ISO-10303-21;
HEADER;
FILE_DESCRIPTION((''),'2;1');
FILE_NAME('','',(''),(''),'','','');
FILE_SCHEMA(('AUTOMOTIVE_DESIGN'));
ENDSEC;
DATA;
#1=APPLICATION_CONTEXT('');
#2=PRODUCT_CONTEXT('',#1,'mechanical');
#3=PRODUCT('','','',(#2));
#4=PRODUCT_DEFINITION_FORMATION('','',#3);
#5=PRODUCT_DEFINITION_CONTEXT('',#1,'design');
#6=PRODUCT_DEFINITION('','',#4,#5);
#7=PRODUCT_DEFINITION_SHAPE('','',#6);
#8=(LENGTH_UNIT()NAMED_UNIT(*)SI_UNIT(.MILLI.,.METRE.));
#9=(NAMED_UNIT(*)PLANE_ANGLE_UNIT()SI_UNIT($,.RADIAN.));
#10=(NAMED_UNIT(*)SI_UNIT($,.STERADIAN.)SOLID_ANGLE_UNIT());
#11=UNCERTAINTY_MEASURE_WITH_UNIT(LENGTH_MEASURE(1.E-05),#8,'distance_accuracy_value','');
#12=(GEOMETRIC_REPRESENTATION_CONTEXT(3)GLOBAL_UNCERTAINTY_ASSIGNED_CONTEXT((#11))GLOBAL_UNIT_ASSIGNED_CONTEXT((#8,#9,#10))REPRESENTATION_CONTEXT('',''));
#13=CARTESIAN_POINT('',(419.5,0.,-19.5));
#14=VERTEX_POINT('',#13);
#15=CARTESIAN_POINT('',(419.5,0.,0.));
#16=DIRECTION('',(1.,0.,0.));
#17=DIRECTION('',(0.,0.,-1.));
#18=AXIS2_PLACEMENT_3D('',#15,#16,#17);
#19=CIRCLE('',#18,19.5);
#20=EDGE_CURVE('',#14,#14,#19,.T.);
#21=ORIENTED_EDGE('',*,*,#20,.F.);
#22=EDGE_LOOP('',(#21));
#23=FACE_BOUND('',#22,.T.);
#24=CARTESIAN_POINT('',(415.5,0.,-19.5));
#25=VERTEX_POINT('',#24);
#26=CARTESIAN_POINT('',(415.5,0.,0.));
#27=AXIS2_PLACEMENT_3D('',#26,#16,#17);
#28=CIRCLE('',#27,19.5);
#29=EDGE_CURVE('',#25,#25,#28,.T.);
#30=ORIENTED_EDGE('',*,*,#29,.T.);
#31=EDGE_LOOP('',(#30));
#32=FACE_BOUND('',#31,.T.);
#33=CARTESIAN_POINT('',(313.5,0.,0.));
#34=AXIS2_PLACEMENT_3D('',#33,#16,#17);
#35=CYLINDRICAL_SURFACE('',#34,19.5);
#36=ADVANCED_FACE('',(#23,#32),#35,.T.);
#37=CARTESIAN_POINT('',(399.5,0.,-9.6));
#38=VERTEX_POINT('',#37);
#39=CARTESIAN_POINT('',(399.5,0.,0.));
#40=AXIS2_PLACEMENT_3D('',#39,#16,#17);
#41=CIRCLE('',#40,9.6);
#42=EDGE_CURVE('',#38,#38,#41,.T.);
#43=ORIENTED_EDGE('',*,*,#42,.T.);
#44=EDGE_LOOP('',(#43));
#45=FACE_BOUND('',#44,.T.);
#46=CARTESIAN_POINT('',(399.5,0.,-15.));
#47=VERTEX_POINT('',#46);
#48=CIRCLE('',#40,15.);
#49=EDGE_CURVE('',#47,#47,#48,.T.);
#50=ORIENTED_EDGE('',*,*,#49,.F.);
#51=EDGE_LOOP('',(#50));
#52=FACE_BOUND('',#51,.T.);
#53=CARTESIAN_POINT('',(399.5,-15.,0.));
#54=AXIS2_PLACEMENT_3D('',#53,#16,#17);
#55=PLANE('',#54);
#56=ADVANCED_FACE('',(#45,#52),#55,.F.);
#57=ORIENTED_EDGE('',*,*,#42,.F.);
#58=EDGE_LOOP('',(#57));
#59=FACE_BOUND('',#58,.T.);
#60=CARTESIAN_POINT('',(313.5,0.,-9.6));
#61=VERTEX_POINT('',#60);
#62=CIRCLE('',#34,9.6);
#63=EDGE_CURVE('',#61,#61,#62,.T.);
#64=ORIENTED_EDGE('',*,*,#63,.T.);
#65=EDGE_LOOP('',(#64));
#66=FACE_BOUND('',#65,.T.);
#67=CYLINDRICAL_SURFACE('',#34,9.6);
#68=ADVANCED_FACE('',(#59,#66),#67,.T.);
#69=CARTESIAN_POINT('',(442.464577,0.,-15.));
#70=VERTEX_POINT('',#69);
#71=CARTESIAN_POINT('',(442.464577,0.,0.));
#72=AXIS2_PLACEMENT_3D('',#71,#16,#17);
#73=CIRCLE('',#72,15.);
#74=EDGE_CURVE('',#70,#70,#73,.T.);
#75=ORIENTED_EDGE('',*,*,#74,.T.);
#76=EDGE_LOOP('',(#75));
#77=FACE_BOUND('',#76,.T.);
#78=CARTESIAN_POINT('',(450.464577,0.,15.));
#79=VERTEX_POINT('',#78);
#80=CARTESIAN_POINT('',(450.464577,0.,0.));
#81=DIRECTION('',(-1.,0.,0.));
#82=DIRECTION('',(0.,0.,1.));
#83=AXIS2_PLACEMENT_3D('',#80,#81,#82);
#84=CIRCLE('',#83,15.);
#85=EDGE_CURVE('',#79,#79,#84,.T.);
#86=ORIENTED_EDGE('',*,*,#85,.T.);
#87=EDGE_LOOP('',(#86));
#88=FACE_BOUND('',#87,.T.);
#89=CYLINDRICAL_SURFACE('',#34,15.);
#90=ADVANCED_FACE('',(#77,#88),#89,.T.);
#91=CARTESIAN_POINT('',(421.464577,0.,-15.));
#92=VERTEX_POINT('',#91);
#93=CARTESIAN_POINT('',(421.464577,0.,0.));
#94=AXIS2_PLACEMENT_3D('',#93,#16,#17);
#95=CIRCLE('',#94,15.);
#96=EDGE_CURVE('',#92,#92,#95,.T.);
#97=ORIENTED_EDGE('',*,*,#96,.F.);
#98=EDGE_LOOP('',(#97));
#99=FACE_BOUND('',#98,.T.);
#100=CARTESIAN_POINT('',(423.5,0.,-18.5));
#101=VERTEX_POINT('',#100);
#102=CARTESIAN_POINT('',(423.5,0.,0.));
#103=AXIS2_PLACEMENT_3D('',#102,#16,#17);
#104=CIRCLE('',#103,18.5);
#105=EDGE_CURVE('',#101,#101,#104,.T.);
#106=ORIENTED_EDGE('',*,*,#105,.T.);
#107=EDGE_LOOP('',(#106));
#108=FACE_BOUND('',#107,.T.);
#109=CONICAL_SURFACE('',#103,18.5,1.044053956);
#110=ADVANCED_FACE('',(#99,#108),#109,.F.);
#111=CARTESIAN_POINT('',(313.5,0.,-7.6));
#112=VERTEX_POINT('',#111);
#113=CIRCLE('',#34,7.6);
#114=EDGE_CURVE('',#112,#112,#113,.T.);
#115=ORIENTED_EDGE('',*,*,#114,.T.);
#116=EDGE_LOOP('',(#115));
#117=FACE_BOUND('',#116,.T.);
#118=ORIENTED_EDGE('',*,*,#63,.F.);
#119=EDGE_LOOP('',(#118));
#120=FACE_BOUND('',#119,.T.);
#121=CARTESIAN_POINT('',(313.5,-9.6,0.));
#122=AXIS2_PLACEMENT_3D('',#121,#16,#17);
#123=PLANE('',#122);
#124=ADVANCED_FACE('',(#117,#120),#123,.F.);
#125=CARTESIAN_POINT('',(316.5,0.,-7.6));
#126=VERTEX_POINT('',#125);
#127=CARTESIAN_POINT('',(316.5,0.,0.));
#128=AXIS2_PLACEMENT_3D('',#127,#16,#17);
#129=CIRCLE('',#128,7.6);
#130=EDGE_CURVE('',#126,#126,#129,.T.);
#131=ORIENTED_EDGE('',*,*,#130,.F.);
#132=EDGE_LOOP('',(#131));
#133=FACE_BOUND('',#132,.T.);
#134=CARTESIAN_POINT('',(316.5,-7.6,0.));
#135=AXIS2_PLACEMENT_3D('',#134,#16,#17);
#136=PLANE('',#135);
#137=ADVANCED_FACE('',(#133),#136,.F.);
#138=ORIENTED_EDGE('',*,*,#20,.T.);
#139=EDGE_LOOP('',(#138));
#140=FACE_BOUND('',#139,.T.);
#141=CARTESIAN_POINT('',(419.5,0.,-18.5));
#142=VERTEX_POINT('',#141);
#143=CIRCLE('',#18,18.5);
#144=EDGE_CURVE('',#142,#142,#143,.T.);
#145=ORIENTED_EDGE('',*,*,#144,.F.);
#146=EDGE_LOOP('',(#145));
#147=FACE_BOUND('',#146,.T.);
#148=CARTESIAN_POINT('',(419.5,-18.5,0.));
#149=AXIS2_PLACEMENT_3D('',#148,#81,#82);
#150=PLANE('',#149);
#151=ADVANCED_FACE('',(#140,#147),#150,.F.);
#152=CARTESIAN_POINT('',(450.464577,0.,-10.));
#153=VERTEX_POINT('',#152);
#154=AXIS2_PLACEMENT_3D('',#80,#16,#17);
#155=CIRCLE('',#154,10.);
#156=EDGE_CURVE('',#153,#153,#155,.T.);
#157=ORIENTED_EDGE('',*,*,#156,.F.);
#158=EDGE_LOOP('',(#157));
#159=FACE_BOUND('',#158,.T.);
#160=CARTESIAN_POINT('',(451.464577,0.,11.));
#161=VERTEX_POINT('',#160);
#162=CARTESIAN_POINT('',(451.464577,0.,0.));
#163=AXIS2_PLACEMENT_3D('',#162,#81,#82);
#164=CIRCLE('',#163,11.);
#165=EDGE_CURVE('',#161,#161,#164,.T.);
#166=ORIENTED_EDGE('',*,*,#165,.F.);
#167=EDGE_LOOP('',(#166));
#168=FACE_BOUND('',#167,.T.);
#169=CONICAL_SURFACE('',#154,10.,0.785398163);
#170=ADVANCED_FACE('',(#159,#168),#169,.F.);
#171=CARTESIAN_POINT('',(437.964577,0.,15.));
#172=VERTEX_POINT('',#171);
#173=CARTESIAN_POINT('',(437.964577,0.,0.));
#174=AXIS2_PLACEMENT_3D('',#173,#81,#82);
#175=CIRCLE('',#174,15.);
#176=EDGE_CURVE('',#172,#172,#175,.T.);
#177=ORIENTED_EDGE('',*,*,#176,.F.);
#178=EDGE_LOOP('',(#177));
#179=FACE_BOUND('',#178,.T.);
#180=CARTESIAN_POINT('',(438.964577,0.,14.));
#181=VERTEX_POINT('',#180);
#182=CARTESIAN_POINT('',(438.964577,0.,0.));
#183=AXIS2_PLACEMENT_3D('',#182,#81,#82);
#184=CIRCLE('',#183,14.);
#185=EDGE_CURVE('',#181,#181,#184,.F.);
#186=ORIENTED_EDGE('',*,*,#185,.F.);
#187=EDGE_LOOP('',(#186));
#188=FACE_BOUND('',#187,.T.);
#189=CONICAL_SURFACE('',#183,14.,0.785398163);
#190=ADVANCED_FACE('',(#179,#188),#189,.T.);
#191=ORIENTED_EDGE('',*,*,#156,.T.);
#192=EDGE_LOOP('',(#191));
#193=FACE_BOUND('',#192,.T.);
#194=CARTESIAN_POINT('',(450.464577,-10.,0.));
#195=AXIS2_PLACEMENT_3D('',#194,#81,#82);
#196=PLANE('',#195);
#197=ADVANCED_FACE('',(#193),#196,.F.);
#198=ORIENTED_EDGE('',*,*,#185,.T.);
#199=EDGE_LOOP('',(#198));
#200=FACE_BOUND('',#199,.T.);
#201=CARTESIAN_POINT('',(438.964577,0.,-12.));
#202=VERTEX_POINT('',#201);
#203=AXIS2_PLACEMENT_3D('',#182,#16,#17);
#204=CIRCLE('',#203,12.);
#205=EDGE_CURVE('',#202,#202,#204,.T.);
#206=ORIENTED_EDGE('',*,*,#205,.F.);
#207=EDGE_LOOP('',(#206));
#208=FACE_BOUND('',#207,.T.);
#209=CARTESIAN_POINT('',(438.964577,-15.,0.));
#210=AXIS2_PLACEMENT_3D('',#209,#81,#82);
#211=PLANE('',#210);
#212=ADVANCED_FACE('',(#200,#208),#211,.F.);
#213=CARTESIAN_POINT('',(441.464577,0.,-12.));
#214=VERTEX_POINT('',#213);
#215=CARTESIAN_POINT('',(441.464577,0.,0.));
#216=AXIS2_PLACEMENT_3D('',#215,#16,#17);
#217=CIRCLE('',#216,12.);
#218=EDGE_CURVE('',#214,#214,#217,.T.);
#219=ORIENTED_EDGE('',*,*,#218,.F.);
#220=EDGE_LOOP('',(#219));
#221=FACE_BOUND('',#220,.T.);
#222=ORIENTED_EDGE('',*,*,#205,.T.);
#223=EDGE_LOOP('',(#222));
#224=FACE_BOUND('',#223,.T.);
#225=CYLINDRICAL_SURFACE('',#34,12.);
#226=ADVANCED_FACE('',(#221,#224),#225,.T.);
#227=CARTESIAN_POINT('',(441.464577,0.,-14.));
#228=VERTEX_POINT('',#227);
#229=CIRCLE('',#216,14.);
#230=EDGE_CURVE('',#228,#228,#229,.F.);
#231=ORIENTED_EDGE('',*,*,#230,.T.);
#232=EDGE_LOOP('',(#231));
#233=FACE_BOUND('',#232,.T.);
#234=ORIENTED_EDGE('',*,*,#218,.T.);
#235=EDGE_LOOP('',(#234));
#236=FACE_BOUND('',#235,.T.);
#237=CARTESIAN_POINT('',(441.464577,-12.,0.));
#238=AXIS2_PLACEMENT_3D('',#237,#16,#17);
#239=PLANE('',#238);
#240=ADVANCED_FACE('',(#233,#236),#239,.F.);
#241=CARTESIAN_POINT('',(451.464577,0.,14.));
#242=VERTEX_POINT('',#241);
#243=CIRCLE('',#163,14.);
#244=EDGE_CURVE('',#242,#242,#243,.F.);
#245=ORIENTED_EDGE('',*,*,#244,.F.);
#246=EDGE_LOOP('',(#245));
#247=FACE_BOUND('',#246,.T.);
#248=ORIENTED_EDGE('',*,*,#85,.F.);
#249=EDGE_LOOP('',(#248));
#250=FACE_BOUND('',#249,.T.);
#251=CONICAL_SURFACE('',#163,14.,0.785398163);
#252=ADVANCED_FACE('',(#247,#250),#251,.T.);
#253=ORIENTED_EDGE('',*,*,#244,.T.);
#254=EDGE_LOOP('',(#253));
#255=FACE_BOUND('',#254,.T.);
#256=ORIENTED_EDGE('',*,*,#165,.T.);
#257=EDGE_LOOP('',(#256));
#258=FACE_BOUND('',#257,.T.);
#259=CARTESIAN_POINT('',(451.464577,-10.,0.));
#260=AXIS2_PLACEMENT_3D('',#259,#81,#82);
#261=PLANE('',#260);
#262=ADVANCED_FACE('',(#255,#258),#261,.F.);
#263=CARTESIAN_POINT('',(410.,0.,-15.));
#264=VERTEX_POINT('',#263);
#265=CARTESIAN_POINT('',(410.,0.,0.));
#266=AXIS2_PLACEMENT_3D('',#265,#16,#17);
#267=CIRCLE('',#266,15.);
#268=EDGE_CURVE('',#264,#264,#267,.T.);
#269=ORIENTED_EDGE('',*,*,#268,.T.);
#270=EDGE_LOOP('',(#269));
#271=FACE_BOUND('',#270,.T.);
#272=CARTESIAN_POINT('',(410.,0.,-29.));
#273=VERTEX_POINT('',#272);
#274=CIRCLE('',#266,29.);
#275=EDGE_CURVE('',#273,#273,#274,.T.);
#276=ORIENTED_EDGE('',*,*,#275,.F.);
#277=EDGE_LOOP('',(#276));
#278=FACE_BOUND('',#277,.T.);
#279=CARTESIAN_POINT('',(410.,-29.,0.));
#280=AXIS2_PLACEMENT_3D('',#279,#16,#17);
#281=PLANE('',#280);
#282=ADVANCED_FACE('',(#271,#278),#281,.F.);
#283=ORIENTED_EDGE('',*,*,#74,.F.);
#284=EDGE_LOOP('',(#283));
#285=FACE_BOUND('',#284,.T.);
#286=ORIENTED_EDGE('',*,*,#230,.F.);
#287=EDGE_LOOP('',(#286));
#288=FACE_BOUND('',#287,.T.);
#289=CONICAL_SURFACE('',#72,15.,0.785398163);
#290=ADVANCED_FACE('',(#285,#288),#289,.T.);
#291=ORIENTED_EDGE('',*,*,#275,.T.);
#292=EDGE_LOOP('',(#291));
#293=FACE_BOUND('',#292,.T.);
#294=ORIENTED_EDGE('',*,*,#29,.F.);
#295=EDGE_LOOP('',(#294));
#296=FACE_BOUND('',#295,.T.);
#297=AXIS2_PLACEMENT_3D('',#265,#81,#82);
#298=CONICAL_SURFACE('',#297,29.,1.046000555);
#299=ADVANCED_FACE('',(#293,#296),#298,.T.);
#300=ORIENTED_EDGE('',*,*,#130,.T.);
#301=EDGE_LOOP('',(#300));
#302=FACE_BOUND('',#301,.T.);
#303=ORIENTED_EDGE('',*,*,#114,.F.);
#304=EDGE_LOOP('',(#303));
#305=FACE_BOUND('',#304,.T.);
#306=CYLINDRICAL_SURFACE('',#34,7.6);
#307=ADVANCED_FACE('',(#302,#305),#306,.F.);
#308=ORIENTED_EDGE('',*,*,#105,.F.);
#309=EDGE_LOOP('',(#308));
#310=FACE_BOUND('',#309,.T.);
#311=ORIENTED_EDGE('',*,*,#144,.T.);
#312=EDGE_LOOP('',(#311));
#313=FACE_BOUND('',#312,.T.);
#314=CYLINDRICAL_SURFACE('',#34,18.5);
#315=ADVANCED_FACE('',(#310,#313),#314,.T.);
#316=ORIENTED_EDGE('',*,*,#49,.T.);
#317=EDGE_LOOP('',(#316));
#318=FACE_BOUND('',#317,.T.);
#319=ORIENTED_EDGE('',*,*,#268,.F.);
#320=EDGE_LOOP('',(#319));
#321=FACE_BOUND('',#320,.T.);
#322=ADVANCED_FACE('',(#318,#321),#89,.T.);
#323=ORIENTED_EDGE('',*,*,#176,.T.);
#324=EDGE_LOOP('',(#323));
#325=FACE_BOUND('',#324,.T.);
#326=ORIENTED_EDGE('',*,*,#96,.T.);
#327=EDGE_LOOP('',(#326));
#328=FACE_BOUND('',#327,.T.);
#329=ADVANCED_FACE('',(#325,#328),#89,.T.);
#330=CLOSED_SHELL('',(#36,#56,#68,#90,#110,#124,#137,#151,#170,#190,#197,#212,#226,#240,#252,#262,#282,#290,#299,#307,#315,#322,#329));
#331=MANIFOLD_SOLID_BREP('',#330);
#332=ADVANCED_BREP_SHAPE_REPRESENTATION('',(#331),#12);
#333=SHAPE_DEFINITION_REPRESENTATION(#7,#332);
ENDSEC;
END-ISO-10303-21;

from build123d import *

# Parameters (mm, degrees)
CHANFREIN1_SIZE = 1


with BuildPart() as part:
    # Esquisse1 → Révolution2 (revolve)
    with BuildSketch(Plane.XY, mode=Mode.PRIVATE) as r_volution2_sk:
        Polygon((438.964577225, -15), (438.964577225, -12), (441.464577225, -12), (441.464577225, -15), (451.464577225, -15), (451.464577225, -10), (450.464577225, -10), (450.464577225, 0), (316.5, 0), (316.5, -7.6), (313.5, -7.6), (313.5, -9.6), (399.5, -9.6), (399.5, -15), (410, -15), (410, -29), (415.5, -19.5), (419.5, -19.5), (419.5, -18.5), (423.5, -18.5), (421.464577225, -15), align=None)
    revolve(r_volution2_sk.sketch.rotate(Axis((313.5, 0, 0), (-1, 0, 0)), 270), axis=Axis((313.5, 0, 0), (-1, 0, 0)))

    # Chanfrein1
    chanfrein1_edges = [part.edges().sort_by_distance(p)[0] for p in [
        (438.964577225, 0, 15),
        (441.464577225, 0, 15),
        (451.464577225, 0, 15),
        (451.464577225, 0, 10),
    ]]
    chamfer(chanfrein1_edges, length=CHANFREIN1_SIZE - 0.0001)  # a hair under: the kernel refuses the full size


solid = part.part
